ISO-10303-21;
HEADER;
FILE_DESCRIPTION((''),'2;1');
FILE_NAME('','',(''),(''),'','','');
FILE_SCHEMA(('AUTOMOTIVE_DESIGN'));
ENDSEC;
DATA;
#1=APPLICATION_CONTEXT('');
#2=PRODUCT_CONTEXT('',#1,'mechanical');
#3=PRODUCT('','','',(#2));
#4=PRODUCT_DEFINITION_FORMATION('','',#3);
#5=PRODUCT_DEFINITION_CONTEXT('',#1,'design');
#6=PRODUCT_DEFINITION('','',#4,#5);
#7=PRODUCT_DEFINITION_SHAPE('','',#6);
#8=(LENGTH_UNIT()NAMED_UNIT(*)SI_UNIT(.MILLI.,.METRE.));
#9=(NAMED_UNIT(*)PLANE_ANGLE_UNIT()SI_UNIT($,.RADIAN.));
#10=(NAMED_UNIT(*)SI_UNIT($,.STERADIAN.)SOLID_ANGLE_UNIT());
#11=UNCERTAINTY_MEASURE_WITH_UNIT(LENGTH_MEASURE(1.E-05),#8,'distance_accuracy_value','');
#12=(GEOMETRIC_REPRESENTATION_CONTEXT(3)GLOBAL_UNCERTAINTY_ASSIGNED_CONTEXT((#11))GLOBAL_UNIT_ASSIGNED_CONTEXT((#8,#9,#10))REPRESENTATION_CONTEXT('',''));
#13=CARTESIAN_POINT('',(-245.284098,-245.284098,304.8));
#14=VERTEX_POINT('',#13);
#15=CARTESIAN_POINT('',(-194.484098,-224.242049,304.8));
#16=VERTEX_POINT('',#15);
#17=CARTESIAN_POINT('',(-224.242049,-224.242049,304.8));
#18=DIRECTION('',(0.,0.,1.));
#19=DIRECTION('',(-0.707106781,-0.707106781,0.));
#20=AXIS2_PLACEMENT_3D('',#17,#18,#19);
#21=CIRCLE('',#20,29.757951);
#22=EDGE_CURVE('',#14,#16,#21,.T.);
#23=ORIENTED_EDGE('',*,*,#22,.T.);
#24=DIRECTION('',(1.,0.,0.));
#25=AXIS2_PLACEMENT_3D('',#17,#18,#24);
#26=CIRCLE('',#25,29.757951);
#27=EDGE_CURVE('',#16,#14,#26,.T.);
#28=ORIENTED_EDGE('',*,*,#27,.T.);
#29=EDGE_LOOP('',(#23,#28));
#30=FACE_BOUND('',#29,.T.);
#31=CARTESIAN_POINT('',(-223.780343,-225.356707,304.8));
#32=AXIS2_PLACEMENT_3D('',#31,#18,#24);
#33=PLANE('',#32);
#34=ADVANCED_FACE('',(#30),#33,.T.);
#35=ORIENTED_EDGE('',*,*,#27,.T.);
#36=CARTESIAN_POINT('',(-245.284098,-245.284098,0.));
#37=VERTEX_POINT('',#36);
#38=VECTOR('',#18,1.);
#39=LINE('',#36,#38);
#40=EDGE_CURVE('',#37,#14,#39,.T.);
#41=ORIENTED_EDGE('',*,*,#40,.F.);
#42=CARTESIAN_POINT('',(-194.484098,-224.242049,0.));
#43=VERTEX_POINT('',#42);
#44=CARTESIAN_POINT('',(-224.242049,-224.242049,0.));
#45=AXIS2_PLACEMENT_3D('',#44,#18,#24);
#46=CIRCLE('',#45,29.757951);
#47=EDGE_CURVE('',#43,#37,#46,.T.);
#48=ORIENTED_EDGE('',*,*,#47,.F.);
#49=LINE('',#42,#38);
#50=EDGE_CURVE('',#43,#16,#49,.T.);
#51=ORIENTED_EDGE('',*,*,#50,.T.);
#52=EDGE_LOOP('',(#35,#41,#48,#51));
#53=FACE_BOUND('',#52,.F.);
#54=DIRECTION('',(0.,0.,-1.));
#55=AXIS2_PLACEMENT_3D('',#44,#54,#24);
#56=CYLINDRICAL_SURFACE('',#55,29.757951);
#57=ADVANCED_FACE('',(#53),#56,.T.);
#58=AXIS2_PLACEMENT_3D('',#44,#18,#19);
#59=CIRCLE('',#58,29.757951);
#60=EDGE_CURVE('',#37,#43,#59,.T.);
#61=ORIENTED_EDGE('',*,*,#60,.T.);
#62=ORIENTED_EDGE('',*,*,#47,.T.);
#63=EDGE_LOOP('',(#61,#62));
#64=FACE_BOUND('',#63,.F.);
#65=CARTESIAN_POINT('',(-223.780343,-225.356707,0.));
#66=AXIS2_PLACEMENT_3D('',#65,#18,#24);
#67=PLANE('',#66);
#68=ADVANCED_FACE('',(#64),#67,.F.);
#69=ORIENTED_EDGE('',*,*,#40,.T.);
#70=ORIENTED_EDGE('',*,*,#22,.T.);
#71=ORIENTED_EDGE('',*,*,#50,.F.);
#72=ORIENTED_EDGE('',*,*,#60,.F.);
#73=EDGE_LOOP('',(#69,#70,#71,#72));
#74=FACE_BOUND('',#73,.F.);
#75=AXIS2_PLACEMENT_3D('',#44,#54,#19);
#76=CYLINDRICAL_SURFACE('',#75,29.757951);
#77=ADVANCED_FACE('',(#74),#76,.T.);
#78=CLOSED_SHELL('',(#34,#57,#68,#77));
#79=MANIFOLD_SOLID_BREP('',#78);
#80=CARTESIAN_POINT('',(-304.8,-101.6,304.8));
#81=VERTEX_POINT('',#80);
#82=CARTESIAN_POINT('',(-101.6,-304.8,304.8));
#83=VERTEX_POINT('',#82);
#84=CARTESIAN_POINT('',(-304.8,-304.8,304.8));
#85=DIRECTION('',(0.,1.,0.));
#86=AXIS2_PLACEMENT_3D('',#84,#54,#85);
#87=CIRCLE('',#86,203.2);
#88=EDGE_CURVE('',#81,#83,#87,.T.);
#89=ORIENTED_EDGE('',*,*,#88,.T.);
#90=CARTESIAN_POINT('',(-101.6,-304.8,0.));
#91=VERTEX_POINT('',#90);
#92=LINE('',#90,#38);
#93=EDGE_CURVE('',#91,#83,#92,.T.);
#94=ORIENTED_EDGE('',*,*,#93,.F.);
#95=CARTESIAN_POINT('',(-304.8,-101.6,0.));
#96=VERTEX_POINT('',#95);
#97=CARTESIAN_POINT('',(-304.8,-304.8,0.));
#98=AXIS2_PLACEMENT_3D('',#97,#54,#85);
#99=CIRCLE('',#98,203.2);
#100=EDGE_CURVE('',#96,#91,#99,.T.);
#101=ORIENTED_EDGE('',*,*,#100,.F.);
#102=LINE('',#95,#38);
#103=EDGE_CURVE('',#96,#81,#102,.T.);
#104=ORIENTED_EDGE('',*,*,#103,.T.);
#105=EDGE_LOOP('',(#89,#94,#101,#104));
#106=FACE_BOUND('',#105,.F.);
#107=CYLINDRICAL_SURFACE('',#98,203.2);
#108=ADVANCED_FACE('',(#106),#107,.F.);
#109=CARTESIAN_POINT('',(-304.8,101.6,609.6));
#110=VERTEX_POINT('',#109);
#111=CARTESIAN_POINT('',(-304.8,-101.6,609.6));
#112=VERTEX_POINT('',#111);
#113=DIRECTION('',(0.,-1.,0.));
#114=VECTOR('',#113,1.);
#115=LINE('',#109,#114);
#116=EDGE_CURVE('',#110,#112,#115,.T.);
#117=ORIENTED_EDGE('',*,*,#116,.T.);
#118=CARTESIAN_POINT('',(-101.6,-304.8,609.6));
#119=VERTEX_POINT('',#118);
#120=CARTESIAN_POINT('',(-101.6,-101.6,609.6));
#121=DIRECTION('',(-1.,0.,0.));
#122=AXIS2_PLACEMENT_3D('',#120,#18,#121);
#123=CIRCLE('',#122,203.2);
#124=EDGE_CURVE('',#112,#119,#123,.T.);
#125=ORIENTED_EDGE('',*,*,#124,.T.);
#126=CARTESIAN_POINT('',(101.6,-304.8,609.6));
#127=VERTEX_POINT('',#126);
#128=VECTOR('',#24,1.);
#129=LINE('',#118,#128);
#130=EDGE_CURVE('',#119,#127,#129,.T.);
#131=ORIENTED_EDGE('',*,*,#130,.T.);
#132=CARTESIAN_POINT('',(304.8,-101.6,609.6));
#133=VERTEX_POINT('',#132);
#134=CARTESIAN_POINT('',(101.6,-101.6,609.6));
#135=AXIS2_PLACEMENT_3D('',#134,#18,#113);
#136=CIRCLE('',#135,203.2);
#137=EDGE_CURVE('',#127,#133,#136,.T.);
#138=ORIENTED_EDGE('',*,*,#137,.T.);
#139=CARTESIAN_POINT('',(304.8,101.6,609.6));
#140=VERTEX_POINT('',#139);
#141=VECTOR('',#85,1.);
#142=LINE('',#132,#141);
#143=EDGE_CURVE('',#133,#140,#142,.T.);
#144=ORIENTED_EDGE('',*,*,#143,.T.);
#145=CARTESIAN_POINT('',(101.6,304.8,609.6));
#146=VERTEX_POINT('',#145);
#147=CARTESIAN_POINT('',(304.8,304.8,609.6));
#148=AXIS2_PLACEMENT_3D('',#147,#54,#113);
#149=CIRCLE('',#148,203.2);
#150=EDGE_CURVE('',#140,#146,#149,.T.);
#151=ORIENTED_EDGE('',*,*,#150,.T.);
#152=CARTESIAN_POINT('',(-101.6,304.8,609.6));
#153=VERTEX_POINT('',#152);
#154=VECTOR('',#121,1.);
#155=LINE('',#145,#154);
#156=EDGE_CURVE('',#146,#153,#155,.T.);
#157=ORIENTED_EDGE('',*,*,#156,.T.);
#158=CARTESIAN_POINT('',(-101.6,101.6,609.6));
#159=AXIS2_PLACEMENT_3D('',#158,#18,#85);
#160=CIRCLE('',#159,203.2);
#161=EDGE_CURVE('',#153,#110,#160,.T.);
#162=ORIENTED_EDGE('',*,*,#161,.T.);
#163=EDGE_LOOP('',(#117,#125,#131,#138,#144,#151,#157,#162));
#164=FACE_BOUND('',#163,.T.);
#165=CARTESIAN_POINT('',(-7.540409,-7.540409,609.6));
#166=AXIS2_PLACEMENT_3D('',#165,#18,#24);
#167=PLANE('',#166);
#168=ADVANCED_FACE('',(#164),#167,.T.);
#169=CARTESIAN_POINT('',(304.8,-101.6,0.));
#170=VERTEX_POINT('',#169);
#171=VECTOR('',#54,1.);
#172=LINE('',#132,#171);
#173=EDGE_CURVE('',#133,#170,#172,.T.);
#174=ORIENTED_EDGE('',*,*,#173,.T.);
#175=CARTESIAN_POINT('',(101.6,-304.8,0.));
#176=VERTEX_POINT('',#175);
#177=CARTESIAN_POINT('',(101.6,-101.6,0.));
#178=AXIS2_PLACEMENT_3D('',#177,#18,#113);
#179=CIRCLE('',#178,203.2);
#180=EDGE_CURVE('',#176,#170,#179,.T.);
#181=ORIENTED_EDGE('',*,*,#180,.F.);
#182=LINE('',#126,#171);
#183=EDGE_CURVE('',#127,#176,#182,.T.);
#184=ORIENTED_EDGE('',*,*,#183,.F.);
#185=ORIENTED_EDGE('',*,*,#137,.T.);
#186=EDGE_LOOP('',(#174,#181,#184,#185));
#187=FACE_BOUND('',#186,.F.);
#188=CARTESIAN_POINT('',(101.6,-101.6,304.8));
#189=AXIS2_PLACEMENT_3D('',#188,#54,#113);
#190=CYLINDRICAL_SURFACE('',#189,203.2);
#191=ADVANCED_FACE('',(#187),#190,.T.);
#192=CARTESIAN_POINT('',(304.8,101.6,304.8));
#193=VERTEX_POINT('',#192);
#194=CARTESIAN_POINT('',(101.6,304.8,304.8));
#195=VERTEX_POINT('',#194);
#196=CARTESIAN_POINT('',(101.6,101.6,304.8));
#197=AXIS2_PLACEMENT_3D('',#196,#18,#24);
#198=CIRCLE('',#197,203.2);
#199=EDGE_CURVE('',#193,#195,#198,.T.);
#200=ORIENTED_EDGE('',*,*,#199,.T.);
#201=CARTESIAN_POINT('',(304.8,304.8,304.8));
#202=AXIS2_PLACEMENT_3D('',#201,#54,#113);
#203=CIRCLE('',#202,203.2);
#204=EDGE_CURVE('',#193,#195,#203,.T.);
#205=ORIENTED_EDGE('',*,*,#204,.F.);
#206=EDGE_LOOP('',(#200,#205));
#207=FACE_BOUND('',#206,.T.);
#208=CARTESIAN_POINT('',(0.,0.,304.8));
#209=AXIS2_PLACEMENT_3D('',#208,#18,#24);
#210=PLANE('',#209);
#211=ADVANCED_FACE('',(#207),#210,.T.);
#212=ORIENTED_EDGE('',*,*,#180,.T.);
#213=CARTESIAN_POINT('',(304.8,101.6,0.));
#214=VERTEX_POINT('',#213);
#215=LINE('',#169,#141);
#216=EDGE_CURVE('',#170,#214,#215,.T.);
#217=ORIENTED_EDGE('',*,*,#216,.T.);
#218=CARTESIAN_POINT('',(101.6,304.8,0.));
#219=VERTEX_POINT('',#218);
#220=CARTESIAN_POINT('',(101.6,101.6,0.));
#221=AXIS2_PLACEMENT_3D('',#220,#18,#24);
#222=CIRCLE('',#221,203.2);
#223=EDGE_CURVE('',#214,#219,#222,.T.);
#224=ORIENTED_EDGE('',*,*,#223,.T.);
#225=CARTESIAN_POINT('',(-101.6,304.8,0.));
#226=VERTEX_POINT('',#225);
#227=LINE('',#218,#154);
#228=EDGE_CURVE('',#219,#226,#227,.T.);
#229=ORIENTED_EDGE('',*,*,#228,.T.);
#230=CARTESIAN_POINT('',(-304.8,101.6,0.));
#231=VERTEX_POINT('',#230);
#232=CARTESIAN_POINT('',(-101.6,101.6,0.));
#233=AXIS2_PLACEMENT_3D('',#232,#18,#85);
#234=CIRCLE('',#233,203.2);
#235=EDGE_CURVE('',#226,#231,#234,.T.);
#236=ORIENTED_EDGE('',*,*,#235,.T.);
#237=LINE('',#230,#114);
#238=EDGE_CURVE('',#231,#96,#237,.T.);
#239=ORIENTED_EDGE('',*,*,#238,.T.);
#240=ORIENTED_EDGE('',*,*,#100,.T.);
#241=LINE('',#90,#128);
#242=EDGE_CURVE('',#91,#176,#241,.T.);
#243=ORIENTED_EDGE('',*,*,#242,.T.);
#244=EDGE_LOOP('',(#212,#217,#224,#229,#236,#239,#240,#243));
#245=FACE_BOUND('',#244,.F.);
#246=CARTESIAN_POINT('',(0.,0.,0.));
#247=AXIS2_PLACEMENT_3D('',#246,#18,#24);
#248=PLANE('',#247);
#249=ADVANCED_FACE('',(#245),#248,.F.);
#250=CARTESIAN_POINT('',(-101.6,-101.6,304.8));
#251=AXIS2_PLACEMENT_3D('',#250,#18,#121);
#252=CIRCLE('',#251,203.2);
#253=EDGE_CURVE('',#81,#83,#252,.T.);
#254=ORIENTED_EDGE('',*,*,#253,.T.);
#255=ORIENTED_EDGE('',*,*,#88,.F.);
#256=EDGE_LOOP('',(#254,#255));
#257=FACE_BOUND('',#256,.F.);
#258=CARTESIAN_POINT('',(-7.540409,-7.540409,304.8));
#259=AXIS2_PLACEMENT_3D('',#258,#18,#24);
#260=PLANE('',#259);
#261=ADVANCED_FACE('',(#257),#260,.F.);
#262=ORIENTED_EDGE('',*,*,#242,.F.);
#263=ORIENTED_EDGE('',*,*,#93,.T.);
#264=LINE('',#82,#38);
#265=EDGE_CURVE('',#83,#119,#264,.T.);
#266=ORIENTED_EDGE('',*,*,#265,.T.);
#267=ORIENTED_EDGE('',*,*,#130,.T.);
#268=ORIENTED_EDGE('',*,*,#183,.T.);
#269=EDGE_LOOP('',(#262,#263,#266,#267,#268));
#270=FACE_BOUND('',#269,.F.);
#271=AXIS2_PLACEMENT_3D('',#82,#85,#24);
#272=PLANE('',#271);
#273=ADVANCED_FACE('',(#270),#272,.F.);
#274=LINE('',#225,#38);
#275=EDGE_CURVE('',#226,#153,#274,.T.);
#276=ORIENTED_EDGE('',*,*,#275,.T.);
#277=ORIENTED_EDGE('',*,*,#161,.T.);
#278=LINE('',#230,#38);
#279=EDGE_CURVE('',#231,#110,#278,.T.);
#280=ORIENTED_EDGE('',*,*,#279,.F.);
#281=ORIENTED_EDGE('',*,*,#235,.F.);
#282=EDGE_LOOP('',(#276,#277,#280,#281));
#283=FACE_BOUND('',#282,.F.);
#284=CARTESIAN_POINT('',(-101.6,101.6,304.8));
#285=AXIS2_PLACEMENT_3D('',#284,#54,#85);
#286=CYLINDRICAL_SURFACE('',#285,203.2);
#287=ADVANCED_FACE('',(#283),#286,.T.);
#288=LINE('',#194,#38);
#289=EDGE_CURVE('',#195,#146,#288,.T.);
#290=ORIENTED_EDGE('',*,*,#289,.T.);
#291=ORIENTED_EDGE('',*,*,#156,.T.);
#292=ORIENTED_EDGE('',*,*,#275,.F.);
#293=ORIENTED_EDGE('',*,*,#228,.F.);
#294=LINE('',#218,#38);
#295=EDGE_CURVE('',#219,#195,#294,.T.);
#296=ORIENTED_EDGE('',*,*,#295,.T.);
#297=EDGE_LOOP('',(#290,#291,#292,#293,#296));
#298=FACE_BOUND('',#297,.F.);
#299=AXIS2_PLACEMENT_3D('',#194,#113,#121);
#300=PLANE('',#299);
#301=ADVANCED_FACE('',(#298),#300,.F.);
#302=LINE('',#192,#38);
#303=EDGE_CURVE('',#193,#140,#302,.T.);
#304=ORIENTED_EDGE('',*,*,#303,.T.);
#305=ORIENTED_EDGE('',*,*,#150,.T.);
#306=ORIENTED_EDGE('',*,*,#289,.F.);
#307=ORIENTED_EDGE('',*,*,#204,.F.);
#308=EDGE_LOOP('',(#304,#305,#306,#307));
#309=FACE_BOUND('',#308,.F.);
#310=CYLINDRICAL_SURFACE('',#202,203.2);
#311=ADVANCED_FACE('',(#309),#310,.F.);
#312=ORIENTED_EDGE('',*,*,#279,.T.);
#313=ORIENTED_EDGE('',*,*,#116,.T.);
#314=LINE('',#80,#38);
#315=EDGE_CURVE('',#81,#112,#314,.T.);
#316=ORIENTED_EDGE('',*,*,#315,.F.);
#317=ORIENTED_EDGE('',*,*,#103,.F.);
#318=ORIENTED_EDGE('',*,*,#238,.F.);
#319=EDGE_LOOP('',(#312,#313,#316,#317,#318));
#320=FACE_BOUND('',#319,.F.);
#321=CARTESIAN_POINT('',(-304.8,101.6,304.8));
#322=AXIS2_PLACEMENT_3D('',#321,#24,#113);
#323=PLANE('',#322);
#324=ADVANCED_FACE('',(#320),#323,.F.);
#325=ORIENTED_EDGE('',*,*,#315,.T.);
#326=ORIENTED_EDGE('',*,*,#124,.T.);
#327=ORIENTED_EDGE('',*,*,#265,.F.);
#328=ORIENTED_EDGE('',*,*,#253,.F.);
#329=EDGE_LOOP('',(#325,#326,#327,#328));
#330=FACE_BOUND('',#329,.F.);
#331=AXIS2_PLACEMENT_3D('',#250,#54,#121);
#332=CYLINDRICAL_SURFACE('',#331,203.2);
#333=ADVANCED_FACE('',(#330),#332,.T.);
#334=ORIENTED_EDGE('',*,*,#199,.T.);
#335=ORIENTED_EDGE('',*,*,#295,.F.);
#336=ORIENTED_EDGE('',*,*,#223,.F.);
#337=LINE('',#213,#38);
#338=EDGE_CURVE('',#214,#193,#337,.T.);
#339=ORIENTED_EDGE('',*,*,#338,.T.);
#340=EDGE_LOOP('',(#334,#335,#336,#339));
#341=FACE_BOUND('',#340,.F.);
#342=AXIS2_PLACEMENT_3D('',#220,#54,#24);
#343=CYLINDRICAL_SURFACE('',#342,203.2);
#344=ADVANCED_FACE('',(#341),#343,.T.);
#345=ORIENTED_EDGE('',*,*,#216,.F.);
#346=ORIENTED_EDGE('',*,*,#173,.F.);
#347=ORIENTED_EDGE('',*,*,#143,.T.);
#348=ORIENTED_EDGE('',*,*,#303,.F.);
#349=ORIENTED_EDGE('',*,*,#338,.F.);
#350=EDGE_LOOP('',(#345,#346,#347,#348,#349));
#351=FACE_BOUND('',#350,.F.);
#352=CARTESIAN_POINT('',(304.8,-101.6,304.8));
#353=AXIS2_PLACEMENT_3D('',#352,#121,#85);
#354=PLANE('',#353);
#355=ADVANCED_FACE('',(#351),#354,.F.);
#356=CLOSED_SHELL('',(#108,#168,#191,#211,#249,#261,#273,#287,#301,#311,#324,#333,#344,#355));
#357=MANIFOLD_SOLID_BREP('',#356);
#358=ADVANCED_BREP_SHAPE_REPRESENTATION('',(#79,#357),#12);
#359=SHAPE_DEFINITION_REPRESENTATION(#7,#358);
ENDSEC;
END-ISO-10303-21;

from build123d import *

# Parameters (mm, degrees)
F1_DEPTH = 304.8
F3_DEPTH = 304.8


# Not quite as in the source:
# - the program builds the solid bodies; features that only make, move or delete a surface that nothing else refers to are left out


with BuildPart() as f1:
    # F0 (on Top) → F1 (new body)
    with BuildSketch(Plane.XY):
        with BuildLine():
            Line((-101.6, -304.8), (101.6, -304.8))
            ThreePointArc((101.6, -304.8), (245.2840979371, -245.2840979371), (304.8, -101.6))
            Line((304.8, -101.6), (304.8, 101.6))
            ThreePointArc((304.8, 101.6), (161.1159020629, 161.1159020629), (101.6, 304.8))
            Line((101.6, 304.8), (-101.6, 304.8))
            ThreePointArc((-101.6, 304.8), (-245.2840979371, 245.2840979371), (-304.8, 101.6))
            Line((-304.8, 101.6), (-304.8, -101.6))
            ThreePointArc((-304.8, -101.6), (-161.1159020629, -161.1159020629), (-101.6, -304.8))
        make_face()
        with BuildLine():
            ThreePointArc((101.6, 304.8), (161.1159020629, 161.1159020629), (304.8, 101.6))
            ThreePointArc((304.8, 101.6), (245.2840979371, 245.2840979371), (101.6, 304.8))
        make_face()
    extrude(amount=F1_DEPTH)

    # F2 (on face) → F3 (join)
    with BuildSketch(Plane.XY.offset(304.8)):
        with BuildLine():
            Line((304.8, -101.6), (304.8, 101.6))
            ThreePointArc((304.8, 101.6), (161.1159020629, 161.1159020629), (101.6, 304.8))
            Line((101.6, 304.8), (-101.6, 304.8))
            ThreePointArc((-101.6, 304.8), (-245.2840979371, 245.2840979371), (-304.8, 101.6))
            Line((-304.8, 101.6), (-304.8, -101.6))
            ThreePointArc((-304.8, -101.6), (-245.2840979371, -245.2840979371), (-101.6, -304.8))
            Line((-101.6, -304.8), (101.6, -304.8))
            ThreePointArc((101.6, -304.8), (245.2840979371, -245.2840979371), (304.8, -101.6))
        make_face()
    extrude(amount=F3_DEPTH)


with BuildPart() as f1b:
    # F0 (on Top) → F1, piece 2 (new body)
    with BuildSketch(Plane.XY):
        with BuildLine():
            ThreePointArc((-194.4840979371, -224.2420489686), (-235.6299238094, -196.7492870811), (-245.2840979371, -245.2840979371))
            ThreePointArc((-245.2840979371, -245.2840979371), (-212.8541741277, -251.734810856), (-194.4840979371, -224.2420489686))
        make_face()
    extrude(amount=F1_DEPTH)


solid = Compound([f1.part, f1b.part])
